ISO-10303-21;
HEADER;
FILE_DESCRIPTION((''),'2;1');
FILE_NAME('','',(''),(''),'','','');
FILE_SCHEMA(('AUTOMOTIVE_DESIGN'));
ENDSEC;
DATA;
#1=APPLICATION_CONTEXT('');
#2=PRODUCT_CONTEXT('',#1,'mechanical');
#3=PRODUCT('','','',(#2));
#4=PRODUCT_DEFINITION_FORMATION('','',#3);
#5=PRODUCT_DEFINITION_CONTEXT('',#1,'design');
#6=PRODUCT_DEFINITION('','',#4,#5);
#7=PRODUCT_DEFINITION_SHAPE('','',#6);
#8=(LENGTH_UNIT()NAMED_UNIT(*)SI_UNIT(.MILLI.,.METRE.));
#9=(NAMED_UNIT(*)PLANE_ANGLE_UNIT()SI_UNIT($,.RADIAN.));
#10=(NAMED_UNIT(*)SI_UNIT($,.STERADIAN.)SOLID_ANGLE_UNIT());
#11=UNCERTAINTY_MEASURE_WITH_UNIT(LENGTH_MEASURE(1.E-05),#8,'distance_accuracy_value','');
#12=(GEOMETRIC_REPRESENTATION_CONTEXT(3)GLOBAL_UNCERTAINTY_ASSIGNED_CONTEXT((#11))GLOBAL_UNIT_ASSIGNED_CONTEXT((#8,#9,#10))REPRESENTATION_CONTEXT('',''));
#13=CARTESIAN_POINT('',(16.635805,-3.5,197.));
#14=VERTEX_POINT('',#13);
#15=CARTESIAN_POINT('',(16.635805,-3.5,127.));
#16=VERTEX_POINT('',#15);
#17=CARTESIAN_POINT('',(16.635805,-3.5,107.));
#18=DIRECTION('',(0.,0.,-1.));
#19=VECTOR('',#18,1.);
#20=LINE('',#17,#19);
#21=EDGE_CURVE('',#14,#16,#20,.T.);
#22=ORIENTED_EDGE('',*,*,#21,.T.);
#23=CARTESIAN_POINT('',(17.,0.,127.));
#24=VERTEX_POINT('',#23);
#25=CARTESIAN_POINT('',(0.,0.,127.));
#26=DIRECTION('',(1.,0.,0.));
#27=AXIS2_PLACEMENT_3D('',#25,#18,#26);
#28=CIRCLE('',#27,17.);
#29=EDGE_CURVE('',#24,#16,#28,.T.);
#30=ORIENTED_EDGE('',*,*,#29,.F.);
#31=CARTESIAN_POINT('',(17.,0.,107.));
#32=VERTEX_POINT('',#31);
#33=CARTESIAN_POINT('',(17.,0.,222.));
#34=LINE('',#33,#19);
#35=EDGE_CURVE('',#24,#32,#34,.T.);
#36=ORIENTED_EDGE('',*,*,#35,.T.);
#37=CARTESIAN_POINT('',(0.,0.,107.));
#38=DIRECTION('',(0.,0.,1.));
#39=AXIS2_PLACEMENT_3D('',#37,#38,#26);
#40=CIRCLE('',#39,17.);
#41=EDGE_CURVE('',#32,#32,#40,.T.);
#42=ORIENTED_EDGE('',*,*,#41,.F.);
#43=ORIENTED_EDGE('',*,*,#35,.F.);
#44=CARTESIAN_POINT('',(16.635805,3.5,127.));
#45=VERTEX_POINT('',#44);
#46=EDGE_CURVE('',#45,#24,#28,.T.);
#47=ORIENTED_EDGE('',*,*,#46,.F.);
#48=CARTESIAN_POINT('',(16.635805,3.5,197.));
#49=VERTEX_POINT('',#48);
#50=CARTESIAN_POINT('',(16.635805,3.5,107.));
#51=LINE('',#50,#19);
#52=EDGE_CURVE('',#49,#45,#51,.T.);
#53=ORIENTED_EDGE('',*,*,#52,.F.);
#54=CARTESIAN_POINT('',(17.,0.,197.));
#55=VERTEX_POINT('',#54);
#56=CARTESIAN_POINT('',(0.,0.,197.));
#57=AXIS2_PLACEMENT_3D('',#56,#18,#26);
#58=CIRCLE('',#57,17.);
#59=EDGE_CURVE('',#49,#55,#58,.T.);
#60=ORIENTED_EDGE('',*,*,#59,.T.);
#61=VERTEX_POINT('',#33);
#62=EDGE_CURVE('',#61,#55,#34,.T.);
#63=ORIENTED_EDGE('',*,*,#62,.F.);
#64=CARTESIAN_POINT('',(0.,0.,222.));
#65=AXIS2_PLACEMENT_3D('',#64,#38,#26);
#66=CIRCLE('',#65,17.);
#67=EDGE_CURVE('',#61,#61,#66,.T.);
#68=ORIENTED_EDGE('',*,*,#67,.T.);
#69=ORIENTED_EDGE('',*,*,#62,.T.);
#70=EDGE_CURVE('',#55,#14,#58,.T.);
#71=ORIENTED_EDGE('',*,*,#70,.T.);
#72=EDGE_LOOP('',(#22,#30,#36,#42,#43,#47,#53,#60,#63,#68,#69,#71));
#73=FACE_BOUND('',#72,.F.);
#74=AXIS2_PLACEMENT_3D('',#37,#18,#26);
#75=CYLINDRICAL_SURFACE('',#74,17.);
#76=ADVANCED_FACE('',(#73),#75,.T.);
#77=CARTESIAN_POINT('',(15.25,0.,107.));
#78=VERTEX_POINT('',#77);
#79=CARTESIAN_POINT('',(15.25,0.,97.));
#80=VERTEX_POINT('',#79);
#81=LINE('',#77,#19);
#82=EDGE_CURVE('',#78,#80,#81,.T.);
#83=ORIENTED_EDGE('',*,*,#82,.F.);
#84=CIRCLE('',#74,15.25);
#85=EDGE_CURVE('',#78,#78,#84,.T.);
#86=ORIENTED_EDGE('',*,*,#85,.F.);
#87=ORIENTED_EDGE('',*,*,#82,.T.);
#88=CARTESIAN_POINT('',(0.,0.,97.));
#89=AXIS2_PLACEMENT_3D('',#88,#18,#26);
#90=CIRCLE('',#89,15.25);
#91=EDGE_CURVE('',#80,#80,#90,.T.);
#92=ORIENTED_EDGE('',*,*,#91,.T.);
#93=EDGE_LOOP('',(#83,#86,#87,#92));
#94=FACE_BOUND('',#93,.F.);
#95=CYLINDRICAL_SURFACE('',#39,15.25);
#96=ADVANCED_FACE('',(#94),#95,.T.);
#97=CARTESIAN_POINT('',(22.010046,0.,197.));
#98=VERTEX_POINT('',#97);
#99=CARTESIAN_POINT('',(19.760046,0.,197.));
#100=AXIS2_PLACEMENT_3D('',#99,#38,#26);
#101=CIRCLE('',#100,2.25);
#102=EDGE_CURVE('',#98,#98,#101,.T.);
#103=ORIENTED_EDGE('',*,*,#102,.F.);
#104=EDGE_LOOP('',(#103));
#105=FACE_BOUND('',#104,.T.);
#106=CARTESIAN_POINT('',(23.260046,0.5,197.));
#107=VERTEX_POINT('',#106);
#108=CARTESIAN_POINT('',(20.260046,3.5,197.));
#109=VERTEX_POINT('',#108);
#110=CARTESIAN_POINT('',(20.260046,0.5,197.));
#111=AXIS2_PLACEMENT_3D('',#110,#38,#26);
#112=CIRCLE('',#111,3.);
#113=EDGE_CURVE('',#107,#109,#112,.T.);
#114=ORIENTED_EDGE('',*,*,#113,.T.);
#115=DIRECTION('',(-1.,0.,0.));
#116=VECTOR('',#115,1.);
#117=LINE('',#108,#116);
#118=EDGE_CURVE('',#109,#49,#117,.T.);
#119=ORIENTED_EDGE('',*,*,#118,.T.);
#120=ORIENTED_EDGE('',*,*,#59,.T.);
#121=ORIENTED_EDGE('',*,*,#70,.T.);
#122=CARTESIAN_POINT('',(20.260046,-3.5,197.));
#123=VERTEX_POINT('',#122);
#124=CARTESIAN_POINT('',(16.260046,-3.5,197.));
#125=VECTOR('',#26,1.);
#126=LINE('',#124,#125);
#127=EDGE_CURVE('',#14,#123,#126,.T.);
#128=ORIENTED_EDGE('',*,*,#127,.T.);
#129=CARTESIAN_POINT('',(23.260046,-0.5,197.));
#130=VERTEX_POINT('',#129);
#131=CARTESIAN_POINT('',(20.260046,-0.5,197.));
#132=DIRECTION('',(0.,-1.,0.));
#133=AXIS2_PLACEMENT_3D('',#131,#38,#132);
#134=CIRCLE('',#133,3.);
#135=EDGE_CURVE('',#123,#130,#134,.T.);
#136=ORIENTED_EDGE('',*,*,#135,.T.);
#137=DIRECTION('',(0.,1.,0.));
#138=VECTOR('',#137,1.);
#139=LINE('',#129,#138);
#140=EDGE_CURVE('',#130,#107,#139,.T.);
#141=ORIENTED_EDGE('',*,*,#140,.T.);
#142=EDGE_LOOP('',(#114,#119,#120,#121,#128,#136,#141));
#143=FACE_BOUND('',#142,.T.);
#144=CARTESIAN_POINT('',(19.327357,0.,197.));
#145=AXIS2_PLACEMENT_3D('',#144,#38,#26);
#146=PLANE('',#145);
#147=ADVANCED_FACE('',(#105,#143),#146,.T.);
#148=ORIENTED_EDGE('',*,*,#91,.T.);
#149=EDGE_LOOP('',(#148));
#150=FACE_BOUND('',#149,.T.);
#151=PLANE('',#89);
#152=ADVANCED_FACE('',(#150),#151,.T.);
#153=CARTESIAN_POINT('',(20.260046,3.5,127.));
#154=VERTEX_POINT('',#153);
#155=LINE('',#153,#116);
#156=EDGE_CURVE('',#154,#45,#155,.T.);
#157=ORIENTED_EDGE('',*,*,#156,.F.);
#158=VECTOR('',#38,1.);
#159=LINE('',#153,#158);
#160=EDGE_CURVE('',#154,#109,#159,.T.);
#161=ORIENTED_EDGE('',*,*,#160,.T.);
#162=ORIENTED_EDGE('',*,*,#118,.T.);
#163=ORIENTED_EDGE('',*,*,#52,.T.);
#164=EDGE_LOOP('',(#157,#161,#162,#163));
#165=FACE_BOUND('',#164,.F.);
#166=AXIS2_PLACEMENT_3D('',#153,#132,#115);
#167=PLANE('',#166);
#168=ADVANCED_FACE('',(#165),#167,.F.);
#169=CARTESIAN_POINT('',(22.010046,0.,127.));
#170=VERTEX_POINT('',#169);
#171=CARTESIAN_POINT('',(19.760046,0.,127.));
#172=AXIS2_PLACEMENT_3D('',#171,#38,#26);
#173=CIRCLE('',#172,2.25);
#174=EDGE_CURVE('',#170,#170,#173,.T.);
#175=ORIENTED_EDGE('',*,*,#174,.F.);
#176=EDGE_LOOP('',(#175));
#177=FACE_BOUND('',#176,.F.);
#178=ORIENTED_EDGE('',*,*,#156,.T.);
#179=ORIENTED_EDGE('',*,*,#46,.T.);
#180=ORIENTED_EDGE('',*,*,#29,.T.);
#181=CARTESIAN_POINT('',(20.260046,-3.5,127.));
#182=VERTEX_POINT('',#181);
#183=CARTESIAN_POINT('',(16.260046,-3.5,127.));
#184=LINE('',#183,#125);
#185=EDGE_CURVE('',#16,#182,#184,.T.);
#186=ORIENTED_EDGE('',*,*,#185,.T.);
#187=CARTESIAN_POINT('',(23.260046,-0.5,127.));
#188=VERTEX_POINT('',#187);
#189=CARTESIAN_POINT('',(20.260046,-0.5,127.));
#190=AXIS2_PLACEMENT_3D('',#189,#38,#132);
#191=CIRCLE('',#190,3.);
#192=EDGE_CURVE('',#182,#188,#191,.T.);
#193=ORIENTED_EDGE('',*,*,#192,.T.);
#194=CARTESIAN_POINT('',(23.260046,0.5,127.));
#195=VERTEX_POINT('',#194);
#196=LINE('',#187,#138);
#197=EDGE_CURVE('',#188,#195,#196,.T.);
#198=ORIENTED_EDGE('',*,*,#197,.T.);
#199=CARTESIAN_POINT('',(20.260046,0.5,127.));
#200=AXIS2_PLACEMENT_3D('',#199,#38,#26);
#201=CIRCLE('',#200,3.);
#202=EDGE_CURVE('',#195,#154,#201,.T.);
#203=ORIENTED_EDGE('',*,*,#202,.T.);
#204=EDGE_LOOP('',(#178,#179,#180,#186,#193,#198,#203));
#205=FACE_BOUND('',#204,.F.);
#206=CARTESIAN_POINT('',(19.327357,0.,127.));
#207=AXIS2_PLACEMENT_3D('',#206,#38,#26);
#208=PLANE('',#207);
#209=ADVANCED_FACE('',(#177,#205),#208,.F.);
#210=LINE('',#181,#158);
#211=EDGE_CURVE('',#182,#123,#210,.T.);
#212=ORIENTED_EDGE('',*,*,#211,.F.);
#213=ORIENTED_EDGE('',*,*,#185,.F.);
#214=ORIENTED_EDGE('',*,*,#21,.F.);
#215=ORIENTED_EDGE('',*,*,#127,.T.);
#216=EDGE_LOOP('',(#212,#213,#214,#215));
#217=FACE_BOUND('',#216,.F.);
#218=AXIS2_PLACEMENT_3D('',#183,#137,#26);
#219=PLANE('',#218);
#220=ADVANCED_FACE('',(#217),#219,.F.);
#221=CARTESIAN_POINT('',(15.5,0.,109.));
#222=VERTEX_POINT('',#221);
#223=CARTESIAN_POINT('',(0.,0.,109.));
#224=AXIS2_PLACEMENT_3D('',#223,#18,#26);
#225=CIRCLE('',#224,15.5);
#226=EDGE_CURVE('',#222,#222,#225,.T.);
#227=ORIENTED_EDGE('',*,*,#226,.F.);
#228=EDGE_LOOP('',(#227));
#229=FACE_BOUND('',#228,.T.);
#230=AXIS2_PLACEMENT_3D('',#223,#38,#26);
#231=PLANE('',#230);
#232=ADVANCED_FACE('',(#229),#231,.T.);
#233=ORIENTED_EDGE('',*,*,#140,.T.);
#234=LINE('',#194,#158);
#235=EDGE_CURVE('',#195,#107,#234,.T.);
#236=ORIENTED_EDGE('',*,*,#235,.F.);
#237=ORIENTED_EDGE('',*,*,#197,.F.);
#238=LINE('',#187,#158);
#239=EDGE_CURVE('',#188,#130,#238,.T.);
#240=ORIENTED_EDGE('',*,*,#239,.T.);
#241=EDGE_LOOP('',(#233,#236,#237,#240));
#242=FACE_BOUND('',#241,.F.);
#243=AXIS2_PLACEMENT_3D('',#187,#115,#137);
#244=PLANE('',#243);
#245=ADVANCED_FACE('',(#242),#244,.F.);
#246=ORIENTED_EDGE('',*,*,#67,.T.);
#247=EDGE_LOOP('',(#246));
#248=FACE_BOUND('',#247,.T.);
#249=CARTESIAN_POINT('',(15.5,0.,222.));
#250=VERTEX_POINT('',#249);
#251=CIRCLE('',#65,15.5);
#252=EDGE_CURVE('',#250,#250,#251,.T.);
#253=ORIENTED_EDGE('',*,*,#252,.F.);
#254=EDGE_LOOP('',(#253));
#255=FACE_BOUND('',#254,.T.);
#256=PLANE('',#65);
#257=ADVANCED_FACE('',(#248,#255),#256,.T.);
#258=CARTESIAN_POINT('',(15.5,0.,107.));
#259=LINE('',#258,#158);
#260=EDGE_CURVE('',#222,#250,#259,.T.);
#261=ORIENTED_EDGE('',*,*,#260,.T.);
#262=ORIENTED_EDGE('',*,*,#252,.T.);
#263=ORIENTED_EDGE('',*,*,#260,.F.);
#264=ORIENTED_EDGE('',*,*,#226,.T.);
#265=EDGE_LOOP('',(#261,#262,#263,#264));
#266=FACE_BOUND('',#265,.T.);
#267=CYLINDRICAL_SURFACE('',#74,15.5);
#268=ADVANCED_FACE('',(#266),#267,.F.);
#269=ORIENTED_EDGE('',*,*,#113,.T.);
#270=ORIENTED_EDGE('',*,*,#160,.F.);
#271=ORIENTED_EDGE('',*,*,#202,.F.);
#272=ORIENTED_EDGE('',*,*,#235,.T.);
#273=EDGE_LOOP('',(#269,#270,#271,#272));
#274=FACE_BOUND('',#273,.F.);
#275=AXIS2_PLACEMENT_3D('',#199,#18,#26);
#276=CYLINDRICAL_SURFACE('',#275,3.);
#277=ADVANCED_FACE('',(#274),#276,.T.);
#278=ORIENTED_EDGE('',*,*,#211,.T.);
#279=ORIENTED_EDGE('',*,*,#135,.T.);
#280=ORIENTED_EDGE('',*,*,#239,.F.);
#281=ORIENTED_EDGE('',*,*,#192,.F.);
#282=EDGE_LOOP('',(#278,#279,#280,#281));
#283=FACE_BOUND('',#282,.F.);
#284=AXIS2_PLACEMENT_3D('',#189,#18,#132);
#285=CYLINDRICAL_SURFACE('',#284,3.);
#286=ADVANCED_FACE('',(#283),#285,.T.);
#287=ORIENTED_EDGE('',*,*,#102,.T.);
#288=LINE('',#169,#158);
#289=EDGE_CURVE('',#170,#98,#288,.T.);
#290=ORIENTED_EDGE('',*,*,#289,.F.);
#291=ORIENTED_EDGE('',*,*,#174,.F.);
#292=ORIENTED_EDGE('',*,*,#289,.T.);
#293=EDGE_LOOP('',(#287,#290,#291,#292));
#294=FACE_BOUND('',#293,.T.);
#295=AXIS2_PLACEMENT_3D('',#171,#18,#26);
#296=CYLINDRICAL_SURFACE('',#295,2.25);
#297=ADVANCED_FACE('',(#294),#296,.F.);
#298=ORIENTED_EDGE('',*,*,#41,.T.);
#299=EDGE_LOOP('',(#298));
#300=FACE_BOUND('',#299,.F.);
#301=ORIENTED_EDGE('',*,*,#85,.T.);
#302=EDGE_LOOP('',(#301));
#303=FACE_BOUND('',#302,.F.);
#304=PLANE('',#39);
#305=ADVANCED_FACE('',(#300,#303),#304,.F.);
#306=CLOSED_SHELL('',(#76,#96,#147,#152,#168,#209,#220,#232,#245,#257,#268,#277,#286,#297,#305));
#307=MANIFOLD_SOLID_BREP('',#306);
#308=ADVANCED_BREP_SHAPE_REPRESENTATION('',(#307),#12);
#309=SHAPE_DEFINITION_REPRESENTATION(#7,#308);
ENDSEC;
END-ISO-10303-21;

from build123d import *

# Parameters (mm, degrees)
F1_R     = 17
F1_R_2   = 15.5
F2_DEPTH = 115
F3_R     = 17
F4_DEPTH = 2
F5_R     = 15.25
F6_DEPTH = 10
F8_R     = 2.25
F9_DEPTH = 70


# Not quite as in the source:
# - a feature of the source that left no trace in its solid (it failed there, or was rolled back) is left out


with BuildPart() as f2:
    # F1 (on offset) → F2 (new body)
    with BuildSketch(Plane.XY.offset(107)):
        Circle(F1_R)
        Circle(F1_R_2, mode=Mode.SUBTRACT)
    extrude(amount=F2_DEPTH)

    # F3 (on offset) → F4 (join)
    with BuildSketch(Plane.XY.offset(107)):
        Circle(F3_R)
    extrude(amount=F4_DEPTH)

    # F5 (on face) → F6 (join)
    with BuildSketch(Plane(origin=(0, 0, 107), x_dir=(1, 0, 0), z_dir=(0, 0, -1))):
        Circle(F5_R)
    extrude(amount=F6_DEPTH)

    # F8 (on offset) → F9 (join)
    with BuildSketch(Plane.XY.offset(127)):
        with BuildLine():
            Line((20.2600458013, 3.5), (16.2600458013, 3.5))
            Line((16.2600458013, 3.5), (16.2600458013, -3.5))
            Line((16.2600458013, -3.5), (20.2600458013, -3.5))
            ThreePointArc((20.2600458013, -3.5), (22.3813661449, -2.6213203436), (23.2600458013, -0.5))
            Line((23.2600458013, -0.5), (23.2600458013, 0.5))
            ThreePointArc((23.2600458013, 0.5), (22.3813661449, 2.6213203436), (20.2600458013, 3.5))
        make_face()
        with Locations((19.7600458013, 0)):
            Circle(F8_R, mode=Mode.SUBTRACT)
    extrude(amount=F9_DEPTH)


solid = f2.part
